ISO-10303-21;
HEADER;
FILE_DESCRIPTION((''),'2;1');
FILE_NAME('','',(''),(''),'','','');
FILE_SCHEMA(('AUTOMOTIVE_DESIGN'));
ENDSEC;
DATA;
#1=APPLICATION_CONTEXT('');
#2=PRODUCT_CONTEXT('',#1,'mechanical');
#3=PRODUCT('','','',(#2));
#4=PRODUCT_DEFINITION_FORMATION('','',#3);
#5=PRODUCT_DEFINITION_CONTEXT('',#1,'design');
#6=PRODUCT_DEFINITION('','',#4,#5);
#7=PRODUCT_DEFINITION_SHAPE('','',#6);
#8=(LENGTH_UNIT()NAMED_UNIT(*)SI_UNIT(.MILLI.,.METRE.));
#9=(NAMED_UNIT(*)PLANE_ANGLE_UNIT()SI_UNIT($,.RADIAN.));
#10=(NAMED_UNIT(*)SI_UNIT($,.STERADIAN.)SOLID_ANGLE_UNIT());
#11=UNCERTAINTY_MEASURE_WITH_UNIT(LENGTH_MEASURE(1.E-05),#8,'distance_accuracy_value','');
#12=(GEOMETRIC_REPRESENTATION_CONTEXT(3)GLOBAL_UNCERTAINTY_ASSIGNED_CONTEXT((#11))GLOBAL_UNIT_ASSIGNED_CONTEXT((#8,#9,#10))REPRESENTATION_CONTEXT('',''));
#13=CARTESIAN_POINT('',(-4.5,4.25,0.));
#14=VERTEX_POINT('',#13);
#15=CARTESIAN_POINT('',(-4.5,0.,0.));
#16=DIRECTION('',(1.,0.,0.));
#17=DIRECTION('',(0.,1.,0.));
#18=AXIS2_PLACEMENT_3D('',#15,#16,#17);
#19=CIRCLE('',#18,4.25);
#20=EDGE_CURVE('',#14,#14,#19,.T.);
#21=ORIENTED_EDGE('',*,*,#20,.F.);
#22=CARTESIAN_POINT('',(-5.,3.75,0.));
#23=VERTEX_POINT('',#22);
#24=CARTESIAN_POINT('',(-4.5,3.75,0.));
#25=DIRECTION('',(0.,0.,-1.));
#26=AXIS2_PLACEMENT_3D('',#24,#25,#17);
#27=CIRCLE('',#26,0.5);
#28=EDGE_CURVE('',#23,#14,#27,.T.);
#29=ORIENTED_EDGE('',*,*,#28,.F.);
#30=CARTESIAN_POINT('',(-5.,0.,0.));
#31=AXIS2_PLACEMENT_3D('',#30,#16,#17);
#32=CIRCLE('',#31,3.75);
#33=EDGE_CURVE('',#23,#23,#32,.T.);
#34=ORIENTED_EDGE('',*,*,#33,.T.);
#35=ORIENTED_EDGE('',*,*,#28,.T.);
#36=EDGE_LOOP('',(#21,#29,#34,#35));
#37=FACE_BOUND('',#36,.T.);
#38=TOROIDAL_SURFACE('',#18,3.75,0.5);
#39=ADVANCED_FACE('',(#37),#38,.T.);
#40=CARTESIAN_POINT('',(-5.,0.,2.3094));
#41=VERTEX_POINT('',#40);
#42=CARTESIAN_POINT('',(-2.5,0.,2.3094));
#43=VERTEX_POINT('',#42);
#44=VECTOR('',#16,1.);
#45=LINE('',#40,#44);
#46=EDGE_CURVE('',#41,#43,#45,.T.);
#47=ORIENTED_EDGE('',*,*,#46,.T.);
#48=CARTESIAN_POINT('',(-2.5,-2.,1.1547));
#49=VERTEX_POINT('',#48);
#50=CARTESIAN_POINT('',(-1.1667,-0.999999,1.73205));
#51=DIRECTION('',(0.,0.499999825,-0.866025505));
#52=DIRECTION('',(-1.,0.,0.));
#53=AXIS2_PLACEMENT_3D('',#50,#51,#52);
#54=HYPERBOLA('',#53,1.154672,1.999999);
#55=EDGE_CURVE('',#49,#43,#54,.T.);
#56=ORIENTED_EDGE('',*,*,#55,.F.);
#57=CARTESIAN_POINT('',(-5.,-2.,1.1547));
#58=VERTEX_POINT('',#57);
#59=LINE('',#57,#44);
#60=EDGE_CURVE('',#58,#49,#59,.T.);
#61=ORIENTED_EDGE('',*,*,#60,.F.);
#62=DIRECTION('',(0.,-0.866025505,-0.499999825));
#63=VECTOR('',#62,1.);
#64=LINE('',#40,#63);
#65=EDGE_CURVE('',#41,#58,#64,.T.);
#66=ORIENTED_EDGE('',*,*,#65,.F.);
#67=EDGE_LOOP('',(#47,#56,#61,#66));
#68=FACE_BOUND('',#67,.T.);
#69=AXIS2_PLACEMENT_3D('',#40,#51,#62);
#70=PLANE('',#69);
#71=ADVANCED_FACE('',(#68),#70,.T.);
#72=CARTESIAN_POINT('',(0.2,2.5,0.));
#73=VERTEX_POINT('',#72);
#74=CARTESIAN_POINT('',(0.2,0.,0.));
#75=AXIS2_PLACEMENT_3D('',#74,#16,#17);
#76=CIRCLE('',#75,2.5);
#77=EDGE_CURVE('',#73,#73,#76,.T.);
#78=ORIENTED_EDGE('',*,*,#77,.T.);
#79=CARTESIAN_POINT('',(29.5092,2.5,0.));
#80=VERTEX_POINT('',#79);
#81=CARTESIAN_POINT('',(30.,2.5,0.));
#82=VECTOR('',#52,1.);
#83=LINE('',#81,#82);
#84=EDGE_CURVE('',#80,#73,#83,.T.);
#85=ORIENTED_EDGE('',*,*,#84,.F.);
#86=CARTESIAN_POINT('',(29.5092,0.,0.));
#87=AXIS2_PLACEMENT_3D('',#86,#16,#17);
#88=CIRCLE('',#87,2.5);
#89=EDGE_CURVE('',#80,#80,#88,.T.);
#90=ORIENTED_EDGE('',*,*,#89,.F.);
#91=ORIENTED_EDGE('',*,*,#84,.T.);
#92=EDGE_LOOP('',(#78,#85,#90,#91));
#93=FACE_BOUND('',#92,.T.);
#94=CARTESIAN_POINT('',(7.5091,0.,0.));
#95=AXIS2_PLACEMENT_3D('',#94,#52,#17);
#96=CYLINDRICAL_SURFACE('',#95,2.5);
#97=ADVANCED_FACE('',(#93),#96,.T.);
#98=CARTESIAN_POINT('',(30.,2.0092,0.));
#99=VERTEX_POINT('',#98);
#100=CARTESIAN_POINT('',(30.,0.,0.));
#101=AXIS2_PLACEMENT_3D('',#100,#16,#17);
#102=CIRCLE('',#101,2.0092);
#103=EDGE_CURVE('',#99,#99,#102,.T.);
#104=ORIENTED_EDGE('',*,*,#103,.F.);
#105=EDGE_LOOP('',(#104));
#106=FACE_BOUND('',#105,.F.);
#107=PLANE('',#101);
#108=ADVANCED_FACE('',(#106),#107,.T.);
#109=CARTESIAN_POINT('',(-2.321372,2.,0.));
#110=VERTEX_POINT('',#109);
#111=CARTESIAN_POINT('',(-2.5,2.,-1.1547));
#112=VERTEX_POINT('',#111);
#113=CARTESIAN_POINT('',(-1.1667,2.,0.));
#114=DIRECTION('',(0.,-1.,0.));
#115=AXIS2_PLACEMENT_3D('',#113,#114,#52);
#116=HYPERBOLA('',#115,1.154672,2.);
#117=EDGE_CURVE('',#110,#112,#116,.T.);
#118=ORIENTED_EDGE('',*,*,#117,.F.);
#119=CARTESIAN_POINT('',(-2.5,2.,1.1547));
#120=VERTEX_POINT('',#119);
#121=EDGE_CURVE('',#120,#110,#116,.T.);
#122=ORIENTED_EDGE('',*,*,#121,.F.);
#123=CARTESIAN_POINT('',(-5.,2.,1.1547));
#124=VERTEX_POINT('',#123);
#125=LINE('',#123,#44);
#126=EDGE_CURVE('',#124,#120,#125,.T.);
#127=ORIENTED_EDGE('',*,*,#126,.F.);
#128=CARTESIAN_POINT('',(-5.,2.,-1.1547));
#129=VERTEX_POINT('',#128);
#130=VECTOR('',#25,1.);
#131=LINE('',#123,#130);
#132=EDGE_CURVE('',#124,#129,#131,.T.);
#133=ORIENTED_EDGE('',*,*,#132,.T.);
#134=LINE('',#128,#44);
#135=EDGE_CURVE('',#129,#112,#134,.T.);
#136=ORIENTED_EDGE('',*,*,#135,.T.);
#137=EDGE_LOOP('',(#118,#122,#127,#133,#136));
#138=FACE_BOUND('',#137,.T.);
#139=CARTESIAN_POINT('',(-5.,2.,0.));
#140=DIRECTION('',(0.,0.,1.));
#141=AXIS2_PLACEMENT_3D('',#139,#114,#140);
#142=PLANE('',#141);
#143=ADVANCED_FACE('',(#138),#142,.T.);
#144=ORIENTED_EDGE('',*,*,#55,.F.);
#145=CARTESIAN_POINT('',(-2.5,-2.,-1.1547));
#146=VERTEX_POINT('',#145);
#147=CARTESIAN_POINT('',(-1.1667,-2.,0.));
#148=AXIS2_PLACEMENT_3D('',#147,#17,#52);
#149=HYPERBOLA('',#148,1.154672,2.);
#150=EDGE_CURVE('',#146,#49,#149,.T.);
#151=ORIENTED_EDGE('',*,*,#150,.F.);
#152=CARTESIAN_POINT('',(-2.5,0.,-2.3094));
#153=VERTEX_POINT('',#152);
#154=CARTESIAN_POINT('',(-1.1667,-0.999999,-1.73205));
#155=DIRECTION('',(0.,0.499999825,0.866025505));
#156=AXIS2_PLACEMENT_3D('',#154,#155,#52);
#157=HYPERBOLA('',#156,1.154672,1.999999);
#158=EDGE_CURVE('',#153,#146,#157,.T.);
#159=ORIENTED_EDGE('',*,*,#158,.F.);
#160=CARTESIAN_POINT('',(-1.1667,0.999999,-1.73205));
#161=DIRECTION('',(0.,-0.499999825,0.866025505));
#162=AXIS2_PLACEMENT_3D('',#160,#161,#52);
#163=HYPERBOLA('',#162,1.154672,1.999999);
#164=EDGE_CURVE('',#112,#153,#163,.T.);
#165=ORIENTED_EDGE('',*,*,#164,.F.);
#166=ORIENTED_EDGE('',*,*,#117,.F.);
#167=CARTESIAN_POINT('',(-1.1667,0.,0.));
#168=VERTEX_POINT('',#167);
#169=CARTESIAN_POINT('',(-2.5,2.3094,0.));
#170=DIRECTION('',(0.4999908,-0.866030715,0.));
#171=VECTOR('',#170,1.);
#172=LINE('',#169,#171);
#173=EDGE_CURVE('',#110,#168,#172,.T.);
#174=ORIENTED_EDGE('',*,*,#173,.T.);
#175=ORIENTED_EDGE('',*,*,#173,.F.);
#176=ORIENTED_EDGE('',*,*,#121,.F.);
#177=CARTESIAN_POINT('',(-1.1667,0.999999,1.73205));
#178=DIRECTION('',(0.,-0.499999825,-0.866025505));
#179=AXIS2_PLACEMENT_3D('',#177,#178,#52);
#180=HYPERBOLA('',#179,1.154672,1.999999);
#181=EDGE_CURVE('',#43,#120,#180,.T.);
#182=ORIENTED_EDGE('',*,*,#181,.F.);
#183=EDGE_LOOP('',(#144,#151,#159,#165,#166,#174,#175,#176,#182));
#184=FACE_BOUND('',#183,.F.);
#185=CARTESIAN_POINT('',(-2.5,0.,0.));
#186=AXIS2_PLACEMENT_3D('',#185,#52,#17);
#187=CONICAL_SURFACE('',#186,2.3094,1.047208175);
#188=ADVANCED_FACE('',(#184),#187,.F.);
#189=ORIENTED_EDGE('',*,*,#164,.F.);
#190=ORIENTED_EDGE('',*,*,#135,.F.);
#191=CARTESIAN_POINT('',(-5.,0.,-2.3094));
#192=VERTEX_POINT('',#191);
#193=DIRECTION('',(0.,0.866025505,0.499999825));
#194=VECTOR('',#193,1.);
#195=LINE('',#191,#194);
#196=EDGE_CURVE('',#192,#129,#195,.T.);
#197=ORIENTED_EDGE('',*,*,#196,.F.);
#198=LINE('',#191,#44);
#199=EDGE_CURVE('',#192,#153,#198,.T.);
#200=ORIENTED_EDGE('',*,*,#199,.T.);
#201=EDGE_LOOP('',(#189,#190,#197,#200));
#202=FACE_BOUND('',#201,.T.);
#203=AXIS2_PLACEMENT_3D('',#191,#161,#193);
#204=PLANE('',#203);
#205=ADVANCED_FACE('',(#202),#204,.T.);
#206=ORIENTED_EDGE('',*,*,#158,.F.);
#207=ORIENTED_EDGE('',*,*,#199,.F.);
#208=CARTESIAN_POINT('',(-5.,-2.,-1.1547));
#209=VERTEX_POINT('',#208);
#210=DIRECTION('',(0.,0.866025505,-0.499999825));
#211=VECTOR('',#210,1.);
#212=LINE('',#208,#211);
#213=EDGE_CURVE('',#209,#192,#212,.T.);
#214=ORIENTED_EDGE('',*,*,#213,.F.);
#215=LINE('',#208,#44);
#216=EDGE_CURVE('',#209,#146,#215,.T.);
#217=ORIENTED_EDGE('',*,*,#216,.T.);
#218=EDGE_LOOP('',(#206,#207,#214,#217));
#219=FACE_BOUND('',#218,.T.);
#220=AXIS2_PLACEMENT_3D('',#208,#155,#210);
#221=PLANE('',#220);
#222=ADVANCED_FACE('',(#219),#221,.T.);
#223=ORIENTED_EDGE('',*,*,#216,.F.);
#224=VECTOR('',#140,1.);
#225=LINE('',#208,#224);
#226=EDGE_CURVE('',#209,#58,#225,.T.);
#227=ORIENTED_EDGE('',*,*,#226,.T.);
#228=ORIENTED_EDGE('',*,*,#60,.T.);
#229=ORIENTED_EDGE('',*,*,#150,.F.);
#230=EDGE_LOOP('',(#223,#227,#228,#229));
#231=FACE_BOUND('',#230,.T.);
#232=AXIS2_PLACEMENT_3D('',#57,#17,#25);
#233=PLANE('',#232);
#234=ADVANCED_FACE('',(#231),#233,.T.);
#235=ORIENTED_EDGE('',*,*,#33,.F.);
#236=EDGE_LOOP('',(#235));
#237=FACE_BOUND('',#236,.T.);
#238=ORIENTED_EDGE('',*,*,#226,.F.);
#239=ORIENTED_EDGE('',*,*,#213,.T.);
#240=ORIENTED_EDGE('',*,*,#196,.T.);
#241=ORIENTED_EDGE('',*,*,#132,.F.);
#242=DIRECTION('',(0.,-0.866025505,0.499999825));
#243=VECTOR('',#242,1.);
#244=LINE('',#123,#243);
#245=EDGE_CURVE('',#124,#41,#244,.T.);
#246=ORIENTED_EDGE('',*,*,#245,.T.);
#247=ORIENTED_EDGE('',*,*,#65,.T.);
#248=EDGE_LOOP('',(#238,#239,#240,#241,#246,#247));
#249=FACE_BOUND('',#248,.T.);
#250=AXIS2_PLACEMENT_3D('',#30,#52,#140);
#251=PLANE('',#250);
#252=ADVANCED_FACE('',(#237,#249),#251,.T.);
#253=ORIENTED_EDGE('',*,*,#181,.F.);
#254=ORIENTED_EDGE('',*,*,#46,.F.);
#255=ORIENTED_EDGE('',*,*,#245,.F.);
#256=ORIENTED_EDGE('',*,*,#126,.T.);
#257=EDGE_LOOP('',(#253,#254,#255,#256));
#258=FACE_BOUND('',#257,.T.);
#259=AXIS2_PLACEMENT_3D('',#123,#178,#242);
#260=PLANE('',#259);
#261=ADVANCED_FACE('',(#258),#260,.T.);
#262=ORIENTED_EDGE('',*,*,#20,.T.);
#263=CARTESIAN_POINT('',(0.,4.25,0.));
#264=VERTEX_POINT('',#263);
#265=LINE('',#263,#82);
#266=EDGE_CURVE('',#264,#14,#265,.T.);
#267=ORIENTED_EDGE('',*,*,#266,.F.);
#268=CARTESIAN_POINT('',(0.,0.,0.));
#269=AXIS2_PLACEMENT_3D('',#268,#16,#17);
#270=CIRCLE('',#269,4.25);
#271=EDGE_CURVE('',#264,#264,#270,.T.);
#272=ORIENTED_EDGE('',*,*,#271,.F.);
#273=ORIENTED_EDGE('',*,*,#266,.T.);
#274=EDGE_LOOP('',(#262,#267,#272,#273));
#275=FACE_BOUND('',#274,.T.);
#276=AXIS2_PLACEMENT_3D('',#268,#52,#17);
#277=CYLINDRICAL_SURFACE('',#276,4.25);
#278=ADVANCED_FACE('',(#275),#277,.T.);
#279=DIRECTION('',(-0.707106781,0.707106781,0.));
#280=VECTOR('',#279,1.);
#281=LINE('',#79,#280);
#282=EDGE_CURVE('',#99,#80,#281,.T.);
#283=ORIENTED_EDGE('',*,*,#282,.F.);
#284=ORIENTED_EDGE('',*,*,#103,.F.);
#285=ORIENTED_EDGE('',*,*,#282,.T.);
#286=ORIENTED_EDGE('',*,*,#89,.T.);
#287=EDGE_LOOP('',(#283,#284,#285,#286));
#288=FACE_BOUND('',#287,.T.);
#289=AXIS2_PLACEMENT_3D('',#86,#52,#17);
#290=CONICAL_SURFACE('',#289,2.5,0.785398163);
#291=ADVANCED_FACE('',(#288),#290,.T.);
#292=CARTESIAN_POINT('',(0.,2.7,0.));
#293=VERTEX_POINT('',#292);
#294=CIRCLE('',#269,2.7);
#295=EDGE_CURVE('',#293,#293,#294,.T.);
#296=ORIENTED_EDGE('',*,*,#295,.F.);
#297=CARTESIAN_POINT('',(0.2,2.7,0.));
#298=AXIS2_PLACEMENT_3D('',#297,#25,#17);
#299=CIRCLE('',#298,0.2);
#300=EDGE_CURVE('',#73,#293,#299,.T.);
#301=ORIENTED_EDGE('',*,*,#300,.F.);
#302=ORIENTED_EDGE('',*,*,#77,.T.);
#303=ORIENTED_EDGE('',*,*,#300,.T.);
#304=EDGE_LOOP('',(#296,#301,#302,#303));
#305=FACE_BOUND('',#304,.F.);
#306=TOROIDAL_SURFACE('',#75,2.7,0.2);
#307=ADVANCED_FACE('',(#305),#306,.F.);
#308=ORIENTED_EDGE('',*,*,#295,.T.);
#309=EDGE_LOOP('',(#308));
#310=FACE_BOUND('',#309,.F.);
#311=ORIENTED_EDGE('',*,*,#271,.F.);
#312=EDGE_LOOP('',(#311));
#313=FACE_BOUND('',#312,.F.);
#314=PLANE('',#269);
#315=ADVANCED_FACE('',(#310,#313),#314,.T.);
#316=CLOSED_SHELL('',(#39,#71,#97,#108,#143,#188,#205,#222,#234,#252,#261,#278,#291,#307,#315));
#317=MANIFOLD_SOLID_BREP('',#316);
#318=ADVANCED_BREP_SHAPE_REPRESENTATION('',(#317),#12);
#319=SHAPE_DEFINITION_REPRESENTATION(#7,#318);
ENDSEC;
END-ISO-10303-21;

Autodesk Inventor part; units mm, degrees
ref_plane "YZ Plane" through (0, 0, 0) normal (1, 0, 0) x (0, 1, 0)
ref_plane "XZ Plane" through (0, 0, 0) normal (0, 1, 0) x (-1, 0, 0)
sketch "Sketch1" plane through (0, 0, 0) normal (0, 0, 1) x (1, 0, 0)
  line L0 (-1.1667, 0) -> (30, 0)
  line L1 (30, 0) -> (30, 2.5)
  line L2 (30, 2.5) -> (8, 2.5)
  line L3 (8, 2.5) -> (7.5091, 2.5)
  line L4 (7.5091, 2.5) -> (0, 2.5)
  line L5 (0, 2.5) -> (0, 4.25)
  line L6 (0, 4.25) -> (-5, 4.25)
  line L7 (-5, 4.25) -> (-5, 2.3094)
  line L8 (-5, 2.3094) -> (-2.5, 2.3094)
  line L9 (-2.5, 2.3094) -> (-1.1667, 0)
  line L10 (-12, 0) -> (37, 0) projected
  line L11 (0, -0.85) -> (0, 5.1) projected
  line L12 (8, 2.5) -> (0, 2.5) construction
  dimension "d1" = 22
  dimension "d2" = 0.4909
  dimension "d3" = 5
  dimension "d4" = 2.5
  dimension "d5" = 60
  dimension "d6" = 5
  dimension "d7" = 5
  dimension "d8" = 4.6188
  dimension "d9" = 8.5
  dimension "d26" = 30
revolve "Body" add sketch "Sketch1" angle 360 about axis through (-1.1667, 0, 0) along (1, 0, 0)
sketch "Sketch2" plane through (-5, 0, 0) normal (-1, 0, 0) x (0, 0, 1)
  circle A0 centre (0, 0) radius 2.3094 projected
  line L0 (0, -5.95) -> (0, 5.95) projected
  line L1 (-5.95, 0) -> (5.95, 0) projected
  line L2 (2.3094, 0) -> (1.1547, -2)
  line L3 (1.1547, -2) -> (-1.1547, -2)
  line L4 (-1.1547, -2) -> (-2.3094, 0)
  line L5 (-2.3094, 0) -> (-1.1547, 2)
  line L6 (-1.1547, 2) -> (1.1547, 2)
  line L7 (1.1547, 2) -> (2.3094, 0)
extrude "Slot" add sketch "Sketch2" against normal up to next contours L7 A0 | A0 L2 | L6 L0 A0 | A0 L0 L3 | L0 L6 A0 | A0 L3 L0 | L4 A0 | A0 L5
fillet "Fillet1" radius 0.5 1 edges at (-5, -4.25, 0)
thread "Thread" size "M5x0.8" class "6g" standard "ISO Metric profile" length 22
chamfer "Chamfer1" distance 0.4908 distance2 0.4908 1 edges at (30, -2.5, 0) measured on face at (30, -0.5525, -0.0341)
ref_plane "Work Plane1" through (29, 0, 0) normal (0, -1, 0) x (1, 0, 0)
fillet "Fillet2" radius 0.2 1 edges at (0, -2.5, 0)
equation "\"d30\" = R"
equation "\"d17\" = RR"
equation "\"d13\" = GEL"
equation "\"d15\" = -0.5 * SPD + 0.5 * GD"
equation "\"d16\" = GUL"
equation "\"d1\" = GEL"
equation "\"d3\" = KOH"
equation "\"d4\" = INTI"
equation "\"d6\" = GD"
equation "\"d7\" = BDM"
equation "\"d8\" = 1.1547 * SW"
equation "\"d9\" = KOD"
equation "\"d26\" = NLG"
equation "\"GD\" = NND"
equation "\"NLG\" = 30"
equation "\"GEL\" = 22"
equation "\"KOD\" = 8.5"
equation "\"KOH\" = 5"
equation "\"INTI\" = 2.5"
equation "\"GAL\" = 0.61345 * PTC"
equation "\"GUL\" = 0.61345 * PTC"
equation "\"BDM\" = NND"
equation "\"SW\" = 4"
equation "\"RR\" = 0.5"
equation "\"SPD\" = NND - 1.2269 * PTC"
equation "\"R\" = 0.2"
equation "\"TOA\" = 30deg"
equation "\"GD1\" = THREADDIA - 1.2269 * PTC"
equation "\"THREADDIA\" = 5"
equation "\"FAWI\" = 45deg"
equation "\"ANG\" = 120deg"
equation "\"PTC\" = 0.8"
equation "\"NND\" = 5"
equation "\"E0\" = 1.155 * SW"
properties part number "DIN 912 - M5 x 30" material "Steel, Mild"
